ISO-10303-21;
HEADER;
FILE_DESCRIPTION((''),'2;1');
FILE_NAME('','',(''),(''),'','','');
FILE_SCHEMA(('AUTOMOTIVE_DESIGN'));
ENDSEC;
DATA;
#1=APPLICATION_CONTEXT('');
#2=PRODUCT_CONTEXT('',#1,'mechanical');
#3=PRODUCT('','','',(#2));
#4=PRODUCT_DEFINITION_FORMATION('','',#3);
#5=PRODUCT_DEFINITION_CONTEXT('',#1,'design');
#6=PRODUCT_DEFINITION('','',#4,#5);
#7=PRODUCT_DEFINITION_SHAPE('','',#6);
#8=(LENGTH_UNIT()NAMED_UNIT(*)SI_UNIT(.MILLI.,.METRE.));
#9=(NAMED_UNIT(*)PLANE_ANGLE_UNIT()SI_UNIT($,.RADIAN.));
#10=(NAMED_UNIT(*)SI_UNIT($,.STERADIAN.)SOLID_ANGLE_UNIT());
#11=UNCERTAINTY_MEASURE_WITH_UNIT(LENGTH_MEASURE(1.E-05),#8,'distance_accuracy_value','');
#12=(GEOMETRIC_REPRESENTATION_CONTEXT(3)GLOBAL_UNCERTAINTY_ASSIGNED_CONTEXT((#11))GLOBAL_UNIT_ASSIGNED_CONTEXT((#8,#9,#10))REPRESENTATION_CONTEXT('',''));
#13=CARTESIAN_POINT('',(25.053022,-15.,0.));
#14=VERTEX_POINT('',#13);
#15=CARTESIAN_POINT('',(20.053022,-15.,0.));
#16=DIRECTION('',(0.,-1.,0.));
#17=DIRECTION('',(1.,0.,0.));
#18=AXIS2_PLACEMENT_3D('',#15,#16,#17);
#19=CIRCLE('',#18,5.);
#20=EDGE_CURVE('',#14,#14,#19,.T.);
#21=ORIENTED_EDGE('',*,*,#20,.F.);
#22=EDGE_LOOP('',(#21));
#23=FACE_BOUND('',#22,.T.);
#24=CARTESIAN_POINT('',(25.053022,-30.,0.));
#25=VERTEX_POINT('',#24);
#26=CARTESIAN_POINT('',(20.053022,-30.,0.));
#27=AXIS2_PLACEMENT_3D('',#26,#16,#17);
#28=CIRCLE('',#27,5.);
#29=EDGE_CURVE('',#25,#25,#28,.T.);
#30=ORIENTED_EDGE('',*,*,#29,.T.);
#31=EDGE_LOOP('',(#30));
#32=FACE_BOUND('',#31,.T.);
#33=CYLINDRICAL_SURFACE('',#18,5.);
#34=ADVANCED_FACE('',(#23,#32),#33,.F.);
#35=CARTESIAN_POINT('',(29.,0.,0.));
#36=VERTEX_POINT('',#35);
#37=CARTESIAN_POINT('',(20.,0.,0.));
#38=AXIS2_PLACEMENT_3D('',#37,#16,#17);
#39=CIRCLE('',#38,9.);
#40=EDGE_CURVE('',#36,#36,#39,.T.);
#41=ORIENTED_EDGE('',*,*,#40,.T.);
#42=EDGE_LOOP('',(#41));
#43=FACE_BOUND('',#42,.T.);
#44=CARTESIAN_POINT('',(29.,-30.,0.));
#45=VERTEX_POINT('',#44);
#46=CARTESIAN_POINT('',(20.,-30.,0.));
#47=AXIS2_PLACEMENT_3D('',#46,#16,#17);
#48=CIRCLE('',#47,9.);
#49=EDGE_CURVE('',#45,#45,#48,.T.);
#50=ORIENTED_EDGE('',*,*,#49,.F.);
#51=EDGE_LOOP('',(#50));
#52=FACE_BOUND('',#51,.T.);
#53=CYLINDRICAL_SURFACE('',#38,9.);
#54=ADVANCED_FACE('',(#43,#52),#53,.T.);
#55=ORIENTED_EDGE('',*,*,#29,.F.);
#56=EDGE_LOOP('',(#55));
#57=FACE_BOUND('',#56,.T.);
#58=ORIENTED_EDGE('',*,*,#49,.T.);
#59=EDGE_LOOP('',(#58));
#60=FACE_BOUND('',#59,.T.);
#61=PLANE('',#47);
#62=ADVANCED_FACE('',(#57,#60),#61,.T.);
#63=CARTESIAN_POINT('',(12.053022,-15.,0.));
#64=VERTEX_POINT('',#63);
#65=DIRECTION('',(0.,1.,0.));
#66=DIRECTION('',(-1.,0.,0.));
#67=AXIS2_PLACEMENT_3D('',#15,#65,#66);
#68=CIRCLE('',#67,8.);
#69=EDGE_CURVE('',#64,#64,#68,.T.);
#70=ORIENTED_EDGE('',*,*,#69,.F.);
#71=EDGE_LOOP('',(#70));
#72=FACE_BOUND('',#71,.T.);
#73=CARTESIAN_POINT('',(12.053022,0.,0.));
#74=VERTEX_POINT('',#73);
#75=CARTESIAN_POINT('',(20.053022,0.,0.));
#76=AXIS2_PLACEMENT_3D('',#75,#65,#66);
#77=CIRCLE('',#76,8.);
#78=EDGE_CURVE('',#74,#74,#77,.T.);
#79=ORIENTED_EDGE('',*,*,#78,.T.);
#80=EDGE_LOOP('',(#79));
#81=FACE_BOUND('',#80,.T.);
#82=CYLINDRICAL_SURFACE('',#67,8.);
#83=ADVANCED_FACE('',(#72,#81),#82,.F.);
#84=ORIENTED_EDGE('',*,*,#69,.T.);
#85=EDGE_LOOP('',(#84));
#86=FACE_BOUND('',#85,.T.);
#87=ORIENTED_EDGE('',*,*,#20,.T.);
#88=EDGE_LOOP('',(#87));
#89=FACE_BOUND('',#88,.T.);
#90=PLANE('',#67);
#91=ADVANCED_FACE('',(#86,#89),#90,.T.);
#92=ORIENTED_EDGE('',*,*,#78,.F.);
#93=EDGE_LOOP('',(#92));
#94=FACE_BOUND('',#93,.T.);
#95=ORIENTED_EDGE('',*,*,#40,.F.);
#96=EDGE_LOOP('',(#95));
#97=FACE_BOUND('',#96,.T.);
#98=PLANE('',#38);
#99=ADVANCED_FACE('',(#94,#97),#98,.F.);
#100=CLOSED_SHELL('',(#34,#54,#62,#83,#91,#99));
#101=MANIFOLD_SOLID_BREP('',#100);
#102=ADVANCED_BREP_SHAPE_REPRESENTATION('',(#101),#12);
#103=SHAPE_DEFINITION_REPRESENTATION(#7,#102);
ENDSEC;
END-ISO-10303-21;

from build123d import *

# Parameters (mm, degrees)
SWEEP1_START       = -30
SWEEP1_OUTLINE_R   = 9
SWEEP1_DEPTH       = 30
SKETCH26_R         = 5
CUT_EXTRUDE1_DEPTH = 15
SKETCH27_R         = 8
CUT_EXTRUDE2_DEPTH = 15


# Read off the part's stored shape, not the designer's step: Sweep1
with BuildPart() as part:
    # Sweep1 outline → Sweep1 (new body)
    with BuildSketch(Plane(origin=(0, 0, 0), x_dir=(1, 0, 0), z_dir=(0, 1, 0)).offset(SWEEP1_START)):
        with Locations((20, 0)):
            Circle(SWEEP1_OUTLINE_R)
    extrude(amount=SWEEP1_DEPTH)

    # Sketch26 → Cut-Extrude1 (cut)
    with BuildSketch(Plane(origin=(0, -30, 0), x_dir=(-1, 0, 0), z_dir=(0, -1, 0))):
        with Locations(Location((-20.053022343, 0, 0), (0, 0, 180))):
            Circle(SKETCH26_R)
    extrude(amount=-CUT_EXTRUDE1_DEPTH, mode=Mode.SUBTRACT)

    # Sketch27 → Cut-Extrude2 (cut)
    with BuildSketch(Plane(origin=(0, 0, 0), x_dir=(1, 0, 0), z_dir=(0, 1, 0))):
        with Locations(Location((20.053022343, 0, 0), (0, 0, 180))):
            Circle(SKETCH27_R)
    extrude(amount=-CUT_EXTRUDE2_DEPTH, mode=Mode.SUBTRACT)


solid = part.part
